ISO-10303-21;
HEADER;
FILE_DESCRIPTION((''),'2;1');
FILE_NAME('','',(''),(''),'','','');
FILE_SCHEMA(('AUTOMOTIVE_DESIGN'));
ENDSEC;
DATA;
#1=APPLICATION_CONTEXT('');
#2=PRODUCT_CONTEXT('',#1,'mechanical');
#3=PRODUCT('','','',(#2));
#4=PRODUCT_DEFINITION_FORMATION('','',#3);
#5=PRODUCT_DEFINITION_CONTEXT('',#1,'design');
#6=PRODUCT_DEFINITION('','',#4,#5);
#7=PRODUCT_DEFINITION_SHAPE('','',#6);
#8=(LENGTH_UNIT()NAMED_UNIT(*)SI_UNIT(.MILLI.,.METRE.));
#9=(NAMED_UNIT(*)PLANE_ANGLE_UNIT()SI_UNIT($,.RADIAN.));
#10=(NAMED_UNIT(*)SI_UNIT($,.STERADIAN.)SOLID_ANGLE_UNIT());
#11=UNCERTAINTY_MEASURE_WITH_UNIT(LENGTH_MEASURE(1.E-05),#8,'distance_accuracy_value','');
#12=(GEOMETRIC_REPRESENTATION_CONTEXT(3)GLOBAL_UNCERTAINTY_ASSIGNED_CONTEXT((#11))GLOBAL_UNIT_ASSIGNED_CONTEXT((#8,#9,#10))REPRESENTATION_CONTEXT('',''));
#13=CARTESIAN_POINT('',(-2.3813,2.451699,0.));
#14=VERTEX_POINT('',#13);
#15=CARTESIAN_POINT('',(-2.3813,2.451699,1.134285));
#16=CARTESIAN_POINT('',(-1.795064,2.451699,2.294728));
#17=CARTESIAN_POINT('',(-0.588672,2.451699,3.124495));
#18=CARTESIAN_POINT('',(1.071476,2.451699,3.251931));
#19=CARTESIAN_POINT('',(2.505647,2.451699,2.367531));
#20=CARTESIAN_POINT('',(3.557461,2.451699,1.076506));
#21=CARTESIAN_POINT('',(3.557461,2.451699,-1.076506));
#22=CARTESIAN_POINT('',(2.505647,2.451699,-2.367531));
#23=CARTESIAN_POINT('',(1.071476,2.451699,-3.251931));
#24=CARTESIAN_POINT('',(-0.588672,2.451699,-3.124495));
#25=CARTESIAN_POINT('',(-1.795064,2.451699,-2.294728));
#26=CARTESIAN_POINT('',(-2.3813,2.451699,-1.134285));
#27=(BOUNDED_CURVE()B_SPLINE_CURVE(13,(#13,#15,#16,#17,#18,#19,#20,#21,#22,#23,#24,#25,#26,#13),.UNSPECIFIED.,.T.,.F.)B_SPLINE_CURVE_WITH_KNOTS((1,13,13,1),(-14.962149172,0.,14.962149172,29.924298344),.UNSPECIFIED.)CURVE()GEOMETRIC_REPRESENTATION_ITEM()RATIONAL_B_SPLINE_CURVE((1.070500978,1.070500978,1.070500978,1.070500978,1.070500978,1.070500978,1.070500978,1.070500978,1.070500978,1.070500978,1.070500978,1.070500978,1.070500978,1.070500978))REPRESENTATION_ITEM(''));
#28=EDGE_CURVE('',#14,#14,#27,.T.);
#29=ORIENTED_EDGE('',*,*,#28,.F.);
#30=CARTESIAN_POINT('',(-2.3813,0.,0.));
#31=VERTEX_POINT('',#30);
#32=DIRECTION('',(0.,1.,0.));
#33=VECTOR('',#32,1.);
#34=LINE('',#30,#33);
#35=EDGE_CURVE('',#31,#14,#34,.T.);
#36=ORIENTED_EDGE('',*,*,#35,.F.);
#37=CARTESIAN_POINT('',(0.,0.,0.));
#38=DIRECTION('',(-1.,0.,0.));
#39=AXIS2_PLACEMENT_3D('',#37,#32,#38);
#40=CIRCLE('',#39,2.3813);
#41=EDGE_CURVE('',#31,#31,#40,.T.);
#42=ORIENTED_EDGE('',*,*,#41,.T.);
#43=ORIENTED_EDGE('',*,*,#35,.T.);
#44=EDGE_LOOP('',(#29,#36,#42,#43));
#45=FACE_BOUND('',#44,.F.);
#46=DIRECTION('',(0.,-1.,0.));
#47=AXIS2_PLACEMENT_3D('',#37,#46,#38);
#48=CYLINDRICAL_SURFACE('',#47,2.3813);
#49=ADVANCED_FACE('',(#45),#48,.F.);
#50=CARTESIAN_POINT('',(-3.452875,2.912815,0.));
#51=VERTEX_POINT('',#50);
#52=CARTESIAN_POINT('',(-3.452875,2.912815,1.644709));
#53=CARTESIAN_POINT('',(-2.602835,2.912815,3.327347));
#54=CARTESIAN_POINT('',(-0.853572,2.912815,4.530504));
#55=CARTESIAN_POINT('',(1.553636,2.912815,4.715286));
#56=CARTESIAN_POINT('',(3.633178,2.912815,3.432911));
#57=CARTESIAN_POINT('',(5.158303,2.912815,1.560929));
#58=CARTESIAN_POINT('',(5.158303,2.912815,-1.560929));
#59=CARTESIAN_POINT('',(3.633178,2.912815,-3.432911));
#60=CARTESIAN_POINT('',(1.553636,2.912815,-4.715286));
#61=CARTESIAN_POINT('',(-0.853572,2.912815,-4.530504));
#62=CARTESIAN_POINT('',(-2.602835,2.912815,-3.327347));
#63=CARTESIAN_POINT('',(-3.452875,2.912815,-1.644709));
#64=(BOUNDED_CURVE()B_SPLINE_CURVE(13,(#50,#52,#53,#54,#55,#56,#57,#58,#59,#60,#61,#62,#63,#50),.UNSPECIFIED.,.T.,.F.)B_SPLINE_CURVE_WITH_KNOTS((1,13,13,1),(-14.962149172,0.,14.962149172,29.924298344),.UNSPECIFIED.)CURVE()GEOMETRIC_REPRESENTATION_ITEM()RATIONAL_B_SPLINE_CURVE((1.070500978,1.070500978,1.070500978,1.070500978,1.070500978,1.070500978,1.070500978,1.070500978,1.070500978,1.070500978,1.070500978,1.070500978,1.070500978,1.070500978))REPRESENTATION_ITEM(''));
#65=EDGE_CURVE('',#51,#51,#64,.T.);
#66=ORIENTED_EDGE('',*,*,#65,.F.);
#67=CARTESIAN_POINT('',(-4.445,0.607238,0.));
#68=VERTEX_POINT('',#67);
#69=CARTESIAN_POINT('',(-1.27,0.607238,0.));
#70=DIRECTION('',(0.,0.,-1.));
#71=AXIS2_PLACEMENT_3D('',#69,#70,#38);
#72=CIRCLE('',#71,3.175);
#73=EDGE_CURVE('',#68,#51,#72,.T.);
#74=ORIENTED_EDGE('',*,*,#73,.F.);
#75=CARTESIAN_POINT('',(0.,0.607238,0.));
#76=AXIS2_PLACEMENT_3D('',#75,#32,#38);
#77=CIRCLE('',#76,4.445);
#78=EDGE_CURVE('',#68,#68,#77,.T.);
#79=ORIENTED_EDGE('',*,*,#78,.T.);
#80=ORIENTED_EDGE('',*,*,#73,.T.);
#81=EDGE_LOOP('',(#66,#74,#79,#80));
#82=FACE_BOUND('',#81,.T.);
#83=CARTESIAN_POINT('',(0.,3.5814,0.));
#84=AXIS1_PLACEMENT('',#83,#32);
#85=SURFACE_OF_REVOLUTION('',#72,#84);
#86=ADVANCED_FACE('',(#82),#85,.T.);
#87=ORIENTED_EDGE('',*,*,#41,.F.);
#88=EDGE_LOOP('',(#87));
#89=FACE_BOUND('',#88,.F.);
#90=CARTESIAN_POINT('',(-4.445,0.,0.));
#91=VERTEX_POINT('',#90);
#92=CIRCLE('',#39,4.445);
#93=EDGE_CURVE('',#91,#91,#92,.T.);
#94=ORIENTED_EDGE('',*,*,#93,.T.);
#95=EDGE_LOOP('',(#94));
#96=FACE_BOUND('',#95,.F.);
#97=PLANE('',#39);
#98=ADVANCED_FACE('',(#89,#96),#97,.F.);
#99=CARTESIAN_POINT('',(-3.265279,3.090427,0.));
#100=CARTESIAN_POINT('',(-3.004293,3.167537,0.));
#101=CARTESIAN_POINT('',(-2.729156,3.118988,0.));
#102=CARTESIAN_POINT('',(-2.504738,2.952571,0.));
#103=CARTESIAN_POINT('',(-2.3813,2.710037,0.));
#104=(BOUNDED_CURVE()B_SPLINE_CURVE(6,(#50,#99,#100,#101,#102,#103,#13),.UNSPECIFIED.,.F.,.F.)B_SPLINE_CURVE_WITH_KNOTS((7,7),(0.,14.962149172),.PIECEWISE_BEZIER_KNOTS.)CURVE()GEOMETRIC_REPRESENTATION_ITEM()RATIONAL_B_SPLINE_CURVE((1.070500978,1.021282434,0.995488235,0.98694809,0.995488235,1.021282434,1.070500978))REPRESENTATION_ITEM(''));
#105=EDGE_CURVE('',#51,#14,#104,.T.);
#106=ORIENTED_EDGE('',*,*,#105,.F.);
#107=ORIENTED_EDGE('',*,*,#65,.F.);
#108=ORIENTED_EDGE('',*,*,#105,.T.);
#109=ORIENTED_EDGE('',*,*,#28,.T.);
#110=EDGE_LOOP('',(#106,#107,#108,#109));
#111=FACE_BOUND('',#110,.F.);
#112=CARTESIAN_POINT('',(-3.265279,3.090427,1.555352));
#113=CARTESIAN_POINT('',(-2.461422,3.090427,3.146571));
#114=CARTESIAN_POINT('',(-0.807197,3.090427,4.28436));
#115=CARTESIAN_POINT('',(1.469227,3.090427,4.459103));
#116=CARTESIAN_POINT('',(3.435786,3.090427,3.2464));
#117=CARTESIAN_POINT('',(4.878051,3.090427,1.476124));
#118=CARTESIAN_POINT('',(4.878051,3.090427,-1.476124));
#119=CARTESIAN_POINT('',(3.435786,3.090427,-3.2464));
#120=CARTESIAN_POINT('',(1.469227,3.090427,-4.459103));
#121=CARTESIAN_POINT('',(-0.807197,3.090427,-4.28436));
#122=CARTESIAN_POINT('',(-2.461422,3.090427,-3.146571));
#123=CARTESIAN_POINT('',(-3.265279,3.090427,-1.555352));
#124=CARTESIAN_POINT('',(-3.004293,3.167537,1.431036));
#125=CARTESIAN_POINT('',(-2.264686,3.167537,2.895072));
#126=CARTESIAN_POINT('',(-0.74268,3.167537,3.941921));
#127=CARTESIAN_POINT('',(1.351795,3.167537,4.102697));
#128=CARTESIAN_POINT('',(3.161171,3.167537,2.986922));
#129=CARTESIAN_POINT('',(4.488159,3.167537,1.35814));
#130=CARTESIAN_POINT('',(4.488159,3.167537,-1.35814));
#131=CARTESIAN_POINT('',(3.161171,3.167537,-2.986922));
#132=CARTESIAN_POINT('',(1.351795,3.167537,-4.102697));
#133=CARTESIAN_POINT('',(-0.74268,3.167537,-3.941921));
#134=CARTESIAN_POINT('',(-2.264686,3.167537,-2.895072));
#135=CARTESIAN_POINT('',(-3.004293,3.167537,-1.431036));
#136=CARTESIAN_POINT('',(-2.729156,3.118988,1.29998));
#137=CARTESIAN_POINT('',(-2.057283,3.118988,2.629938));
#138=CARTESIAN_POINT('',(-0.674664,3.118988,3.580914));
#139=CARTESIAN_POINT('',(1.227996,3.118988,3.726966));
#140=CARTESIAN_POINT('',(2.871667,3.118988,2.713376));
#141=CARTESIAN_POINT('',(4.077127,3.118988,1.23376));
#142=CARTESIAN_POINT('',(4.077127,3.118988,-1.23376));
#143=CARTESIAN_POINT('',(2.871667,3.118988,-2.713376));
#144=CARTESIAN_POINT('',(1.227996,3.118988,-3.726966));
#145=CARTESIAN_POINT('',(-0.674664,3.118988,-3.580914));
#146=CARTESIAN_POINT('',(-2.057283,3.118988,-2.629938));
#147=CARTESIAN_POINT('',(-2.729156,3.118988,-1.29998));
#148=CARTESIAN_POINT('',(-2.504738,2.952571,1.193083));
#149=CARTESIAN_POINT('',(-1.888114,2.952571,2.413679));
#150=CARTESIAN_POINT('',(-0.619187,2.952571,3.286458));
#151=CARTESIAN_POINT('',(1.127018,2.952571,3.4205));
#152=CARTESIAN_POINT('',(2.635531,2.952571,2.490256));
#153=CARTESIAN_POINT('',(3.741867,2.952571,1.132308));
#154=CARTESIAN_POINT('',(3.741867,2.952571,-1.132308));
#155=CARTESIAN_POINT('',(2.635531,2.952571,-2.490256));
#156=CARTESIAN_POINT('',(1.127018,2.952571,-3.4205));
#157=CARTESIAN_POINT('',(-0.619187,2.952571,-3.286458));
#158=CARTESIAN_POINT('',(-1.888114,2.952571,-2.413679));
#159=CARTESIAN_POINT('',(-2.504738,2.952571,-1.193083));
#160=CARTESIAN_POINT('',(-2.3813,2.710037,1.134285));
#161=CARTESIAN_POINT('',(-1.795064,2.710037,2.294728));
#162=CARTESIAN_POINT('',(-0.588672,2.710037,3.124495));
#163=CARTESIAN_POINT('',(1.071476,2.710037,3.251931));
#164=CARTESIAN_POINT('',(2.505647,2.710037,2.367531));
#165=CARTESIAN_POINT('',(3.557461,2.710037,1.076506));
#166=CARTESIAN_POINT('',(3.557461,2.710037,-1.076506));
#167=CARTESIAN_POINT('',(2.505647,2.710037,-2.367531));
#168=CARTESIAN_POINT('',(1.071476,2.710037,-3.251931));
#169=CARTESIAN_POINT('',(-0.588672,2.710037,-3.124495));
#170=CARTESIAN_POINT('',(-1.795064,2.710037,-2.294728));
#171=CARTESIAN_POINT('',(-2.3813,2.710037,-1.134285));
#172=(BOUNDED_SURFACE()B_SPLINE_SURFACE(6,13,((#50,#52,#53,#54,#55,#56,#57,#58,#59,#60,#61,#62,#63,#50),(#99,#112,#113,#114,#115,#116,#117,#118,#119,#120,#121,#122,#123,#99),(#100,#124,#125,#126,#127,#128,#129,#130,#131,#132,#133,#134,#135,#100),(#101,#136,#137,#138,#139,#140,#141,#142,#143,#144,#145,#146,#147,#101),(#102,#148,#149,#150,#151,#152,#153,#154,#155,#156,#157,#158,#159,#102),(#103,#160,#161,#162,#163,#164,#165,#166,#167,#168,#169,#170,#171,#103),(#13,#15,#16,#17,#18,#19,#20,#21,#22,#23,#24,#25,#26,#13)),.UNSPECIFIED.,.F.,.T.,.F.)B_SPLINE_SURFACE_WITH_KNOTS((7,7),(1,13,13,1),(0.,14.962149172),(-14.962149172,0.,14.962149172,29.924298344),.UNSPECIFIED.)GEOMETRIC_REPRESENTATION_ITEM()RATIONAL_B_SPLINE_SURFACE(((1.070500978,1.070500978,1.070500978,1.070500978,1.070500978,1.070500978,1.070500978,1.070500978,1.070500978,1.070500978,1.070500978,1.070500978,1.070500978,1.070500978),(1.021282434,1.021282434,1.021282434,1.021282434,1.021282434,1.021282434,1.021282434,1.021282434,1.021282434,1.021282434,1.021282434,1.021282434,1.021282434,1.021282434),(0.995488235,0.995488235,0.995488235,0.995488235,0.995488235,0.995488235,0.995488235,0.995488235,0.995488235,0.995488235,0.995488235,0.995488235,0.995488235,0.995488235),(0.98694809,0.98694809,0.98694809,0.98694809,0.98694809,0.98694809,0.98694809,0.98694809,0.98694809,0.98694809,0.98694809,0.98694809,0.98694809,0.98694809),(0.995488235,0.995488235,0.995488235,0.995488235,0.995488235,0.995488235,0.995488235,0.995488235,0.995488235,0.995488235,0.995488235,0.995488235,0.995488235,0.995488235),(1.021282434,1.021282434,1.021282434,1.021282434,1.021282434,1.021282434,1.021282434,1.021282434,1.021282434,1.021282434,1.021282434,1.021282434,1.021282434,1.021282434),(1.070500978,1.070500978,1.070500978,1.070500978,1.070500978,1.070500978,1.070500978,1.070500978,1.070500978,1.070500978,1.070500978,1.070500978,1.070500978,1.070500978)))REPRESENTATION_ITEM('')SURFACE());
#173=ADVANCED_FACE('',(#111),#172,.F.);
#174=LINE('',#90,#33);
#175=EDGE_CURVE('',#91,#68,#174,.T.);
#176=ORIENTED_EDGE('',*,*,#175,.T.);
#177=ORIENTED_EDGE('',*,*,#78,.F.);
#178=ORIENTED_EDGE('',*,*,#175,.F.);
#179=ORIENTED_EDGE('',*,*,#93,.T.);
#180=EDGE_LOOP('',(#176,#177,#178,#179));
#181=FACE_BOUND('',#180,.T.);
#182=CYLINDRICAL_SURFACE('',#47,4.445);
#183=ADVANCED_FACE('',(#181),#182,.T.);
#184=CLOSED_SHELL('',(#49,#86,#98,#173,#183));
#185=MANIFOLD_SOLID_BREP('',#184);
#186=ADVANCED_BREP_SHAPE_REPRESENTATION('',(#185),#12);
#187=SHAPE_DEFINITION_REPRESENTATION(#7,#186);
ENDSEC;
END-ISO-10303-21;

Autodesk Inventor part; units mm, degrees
ref_plane "YZ Plane" through (0, 0, 0) normal (1, 0, 0) x (0, 1, 0)
ref_plane "XZ Plane" through (0, 0, 0) normal (0, 1, 0) x (-1, 0, 0)
ref_plane "XY Plane" through (0, 0, 0) normal (0, 0, 1) x (1, 0, 0)
sketch "Sketch1" plane through (0, 0, 0) normal (0, 1, 0) x (-1, 0, 0)
  circle A0 centre (0, 0) radius 2.3813
  circle A1 centre (0, 0) radius 4.445
  dimension "d0" = 4.7625
  dimension "d1" = 8.89
extrude "Extrusion1" add sketch "Sketch1" along normal blind 3.5814
fillet "Fillet1" radius 3.175 1 edges at (4.445, 3.5814, 0)
fillet "Fillet2" radius 0.635 1 edges at (2.3813, 3.5814, 0)
properties part number "ELEV_010_BOLTCOVER2" material "Rubber"
